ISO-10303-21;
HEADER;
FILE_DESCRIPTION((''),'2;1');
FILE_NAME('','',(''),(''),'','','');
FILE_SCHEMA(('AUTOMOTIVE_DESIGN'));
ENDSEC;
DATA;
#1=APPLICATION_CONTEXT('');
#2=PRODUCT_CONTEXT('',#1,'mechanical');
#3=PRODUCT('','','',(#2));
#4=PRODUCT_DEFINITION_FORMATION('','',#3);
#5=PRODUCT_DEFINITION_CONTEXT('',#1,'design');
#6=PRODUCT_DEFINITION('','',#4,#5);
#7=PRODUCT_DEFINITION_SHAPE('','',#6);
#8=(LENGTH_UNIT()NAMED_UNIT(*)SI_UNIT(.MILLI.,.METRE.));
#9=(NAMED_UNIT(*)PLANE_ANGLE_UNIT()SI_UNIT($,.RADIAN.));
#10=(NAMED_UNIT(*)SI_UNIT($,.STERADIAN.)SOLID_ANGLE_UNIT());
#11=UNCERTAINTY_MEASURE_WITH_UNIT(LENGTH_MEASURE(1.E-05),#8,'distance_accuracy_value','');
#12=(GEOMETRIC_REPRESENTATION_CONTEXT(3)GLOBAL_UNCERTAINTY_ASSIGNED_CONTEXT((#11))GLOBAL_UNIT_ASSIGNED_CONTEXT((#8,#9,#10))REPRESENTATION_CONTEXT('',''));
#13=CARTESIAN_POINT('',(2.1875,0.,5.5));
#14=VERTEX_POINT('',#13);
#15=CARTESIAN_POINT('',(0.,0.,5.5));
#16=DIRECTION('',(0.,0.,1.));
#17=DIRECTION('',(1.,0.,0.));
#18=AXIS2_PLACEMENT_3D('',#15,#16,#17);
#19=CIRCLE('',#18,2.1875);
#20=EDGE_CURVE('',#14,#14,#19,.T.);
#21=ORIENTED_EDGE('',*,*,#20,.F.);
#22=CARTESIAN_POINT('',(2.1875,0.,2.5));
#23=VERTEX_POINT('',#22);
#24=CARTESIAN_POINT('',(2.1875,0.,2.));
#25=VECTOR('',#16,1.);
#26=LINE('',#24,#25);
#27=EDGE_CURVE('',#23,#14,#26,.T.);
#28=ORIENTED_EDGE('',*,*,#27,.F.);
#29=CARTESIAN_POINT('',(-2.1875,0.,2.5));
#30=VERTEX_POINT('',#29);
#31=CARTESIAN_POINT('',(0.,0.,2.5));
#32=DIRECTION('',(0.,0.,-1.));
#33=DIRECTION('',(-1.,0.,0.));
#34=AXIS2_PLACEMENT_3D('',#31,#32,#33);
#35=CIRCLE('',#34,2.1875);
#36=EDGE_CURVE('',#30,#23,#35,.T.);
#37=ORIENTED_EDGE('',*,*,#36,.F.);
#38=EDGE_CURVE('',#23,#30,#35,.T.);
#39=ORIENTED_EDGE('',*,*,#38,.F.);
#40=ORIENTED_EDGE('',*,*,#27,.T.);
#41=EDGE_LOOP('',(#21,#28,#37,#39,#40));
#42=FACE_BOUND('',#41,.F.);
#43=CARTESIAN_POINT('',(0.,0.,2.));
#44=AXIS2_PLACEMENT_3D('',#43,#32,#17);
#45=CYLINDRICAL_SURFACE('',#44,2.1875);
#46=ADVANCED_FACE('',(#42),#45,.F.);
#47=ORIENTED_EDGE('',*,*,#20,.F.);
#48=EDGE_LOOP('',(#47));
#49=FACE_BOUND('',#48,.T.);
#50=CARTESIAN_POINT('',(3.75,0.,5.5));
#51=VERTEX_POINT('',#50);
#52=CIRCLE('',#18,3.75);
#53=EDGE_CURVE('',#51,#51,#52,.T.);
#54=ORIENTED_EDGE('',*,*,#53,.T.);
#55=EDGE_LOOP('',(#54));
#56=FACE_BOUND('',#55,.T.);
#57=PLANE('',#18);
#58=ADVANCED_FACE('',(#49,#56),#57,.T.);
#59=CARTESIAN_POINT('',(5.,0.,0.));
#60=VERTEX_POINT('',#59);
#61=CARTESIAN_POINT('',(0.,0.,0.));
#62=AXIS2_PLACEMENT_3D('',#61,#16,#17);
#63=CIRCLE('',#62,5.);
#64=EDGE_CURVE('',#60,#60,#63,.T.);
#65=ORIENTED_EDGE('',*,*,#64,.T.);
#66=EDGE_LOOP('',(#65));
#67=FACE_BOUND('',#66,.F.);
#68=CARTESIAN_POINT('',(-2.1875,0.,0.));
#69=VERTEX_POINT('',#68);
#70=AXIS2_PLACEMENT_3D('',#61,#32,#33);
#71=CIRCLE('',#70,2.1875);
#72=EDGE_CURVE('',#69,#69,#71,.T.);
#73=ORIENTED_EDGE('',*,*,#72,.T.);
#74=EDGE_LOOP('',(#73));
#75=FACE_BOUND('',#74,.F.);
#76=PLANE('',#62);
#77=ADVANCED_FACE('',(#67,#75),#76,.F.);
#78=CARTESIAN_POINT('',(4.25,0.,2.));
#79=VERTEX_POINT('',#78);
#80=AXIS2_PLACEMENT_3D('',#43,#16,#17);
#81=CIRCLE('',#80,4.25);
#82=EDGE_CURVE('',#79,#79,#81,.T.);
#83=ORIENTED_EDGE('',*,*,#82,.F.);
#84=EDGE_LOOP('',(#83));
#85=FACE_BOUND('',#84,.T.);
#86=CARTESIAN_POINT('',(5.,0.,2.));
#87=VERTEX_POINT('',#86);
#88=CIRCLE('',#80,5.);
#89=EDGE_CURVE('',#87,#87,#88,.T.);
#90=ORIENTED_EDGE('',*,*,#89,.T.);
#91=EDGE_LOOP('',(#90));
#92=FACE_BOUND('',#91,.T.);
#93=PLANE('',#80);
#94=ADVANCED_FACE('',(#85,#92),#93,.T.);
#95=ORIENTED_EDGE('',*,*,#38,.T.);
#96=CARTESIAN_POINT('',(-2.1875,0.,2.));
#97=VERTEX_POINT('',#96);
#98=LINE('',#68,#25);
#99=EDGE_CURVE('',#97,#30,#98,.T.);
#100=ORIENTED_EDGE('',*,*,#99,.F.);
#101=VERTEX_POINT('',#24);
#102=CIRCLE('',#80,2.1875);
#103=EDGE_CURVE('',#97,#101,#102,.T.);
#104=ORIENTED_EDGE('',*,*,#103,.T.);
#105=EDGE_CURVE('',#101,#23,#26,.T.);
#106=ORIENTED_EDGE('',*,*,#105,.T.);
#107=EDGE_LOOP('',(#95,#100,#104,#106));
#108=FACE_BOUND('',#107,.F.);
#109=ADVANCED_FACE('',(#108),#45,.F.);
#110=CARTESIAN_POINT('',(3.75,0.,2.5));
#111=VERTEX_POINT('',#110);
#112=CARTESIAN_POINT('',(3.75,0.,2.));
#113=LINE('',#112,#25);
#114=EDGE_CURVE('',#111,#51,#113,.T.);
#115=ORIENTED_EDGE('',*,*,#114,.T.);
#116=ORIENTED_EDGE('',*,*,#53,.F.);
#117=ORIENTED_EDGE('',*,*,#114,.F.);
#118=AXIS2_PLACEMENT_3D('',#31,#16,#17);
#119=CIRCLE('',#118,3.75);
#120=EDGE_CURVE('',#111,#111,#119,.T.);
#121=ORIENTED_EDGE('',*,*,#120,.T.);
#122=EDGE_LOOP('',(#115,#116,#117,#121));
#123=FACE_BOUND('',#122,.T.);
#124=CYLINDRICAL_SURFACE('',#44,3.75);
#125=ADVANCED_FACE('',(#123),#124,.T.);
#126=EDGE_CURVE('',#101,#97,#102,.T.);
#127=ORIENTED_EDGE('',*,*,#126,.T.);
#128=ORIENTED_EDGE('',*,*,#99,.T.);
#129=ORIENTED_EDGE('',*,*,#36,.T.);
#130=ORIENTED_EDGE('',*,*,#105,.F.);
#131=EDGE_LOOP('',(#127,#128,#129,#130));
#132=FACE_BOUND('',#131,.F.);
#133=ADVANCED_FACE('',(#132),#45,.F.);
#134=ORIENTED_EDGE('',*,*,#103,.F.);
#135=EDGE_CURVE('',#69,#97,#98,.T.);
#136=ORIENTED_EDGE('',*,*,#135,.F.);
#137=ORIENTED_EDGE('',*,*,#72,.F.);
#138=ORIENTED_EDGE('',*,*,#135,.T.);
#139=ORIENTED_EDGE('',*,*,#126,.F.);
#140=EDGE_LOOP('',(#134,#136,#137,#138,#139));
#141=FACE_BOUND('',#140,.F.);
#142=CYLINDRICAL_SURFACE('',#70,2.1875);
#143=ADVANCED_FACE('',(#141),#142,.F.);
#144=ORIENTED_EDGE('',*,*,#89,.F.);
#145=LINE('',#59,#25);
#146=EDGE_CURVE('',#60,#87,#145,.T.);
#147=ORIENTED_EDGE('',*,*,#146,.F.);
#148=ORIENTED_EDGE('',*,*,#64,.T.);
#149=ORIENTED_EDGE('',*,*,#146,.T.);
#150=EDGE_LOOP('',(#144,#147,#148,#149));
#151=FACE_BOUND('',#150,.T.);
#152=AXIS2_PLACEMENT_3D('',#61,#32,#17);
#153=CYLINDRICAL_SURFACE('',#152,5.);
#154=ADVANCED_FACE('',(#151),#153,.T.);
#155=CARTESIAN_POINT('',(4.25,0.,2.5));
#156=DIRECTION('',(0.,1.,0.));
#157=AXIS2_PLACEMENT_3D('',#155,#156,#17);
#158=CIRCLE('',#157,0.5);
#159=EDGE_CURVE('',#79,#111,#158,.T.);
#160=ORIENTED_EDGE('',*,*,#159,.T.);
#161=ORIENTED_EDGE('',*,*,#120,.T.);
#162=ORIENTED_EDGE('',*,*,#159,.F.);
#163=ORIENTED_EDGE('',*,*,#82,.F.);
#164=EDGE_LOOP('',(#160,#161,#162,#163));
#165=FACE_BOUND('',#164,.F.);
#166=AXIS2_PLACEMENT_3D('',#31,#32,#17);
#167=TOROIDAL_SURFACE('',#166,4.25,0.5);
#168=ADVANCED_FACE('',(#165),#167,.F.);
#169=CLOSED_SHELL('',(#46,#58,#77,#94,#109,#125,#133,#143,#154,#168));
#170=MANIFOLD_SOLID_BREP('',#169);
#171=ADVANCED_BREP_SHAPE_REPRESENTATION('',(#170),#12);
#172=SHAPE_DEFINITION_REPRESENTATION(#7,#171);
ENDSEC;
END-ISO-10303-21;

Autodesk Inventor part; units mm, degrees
ref_plane "YZ Plane" through (0, 0, 0) normal (1, 0, 0) x (0, 1, 0)
ref_plane "XZ Plane" through (0, 0, 0) normal (0, 1, 0) x (-1, 0, 0)
ref_plane "XY Plane" through (0, 0, 0) normal (0, 0, 1) x (1, 0, 0)
sketch "Sketch1" plane through (0, 0, 0) normal (0, 0, 1) x (1, 0, 0)
  circle A0 centre (0, 0) radius 5
  dimension "d0" = 10
extrude "Extrusion1" add sketch "Sketch1" along normal blind 2
sketch "Sketch2" plane through (0, 0, 2) normal (0, 0, 1) x (1, 0, 0)
  circle A0 centre (0, 0) radius 3.75
  circle A1 centre (0, 0) radius 2.1875
  dimension "d3" = 7.5
  dimension "d4" = 4.375
extrude "Extrusion2" add sketch "Sketch2" along normal blind 3.5
sketch "Sketch3" plane through (0, 0, 0) normal (0, 0, -1) x (-1, 0, 0)
  circle A0 centre (0, 0) radius 2.1875 projected
extrude "Extrusion3" cut sketch "Sketch3" against normal blind 2.5
fillet "Face Fillet1" radius 0.5 1 edges at (-3.75, 0, 2)
properties part number "hombrocojinete"
